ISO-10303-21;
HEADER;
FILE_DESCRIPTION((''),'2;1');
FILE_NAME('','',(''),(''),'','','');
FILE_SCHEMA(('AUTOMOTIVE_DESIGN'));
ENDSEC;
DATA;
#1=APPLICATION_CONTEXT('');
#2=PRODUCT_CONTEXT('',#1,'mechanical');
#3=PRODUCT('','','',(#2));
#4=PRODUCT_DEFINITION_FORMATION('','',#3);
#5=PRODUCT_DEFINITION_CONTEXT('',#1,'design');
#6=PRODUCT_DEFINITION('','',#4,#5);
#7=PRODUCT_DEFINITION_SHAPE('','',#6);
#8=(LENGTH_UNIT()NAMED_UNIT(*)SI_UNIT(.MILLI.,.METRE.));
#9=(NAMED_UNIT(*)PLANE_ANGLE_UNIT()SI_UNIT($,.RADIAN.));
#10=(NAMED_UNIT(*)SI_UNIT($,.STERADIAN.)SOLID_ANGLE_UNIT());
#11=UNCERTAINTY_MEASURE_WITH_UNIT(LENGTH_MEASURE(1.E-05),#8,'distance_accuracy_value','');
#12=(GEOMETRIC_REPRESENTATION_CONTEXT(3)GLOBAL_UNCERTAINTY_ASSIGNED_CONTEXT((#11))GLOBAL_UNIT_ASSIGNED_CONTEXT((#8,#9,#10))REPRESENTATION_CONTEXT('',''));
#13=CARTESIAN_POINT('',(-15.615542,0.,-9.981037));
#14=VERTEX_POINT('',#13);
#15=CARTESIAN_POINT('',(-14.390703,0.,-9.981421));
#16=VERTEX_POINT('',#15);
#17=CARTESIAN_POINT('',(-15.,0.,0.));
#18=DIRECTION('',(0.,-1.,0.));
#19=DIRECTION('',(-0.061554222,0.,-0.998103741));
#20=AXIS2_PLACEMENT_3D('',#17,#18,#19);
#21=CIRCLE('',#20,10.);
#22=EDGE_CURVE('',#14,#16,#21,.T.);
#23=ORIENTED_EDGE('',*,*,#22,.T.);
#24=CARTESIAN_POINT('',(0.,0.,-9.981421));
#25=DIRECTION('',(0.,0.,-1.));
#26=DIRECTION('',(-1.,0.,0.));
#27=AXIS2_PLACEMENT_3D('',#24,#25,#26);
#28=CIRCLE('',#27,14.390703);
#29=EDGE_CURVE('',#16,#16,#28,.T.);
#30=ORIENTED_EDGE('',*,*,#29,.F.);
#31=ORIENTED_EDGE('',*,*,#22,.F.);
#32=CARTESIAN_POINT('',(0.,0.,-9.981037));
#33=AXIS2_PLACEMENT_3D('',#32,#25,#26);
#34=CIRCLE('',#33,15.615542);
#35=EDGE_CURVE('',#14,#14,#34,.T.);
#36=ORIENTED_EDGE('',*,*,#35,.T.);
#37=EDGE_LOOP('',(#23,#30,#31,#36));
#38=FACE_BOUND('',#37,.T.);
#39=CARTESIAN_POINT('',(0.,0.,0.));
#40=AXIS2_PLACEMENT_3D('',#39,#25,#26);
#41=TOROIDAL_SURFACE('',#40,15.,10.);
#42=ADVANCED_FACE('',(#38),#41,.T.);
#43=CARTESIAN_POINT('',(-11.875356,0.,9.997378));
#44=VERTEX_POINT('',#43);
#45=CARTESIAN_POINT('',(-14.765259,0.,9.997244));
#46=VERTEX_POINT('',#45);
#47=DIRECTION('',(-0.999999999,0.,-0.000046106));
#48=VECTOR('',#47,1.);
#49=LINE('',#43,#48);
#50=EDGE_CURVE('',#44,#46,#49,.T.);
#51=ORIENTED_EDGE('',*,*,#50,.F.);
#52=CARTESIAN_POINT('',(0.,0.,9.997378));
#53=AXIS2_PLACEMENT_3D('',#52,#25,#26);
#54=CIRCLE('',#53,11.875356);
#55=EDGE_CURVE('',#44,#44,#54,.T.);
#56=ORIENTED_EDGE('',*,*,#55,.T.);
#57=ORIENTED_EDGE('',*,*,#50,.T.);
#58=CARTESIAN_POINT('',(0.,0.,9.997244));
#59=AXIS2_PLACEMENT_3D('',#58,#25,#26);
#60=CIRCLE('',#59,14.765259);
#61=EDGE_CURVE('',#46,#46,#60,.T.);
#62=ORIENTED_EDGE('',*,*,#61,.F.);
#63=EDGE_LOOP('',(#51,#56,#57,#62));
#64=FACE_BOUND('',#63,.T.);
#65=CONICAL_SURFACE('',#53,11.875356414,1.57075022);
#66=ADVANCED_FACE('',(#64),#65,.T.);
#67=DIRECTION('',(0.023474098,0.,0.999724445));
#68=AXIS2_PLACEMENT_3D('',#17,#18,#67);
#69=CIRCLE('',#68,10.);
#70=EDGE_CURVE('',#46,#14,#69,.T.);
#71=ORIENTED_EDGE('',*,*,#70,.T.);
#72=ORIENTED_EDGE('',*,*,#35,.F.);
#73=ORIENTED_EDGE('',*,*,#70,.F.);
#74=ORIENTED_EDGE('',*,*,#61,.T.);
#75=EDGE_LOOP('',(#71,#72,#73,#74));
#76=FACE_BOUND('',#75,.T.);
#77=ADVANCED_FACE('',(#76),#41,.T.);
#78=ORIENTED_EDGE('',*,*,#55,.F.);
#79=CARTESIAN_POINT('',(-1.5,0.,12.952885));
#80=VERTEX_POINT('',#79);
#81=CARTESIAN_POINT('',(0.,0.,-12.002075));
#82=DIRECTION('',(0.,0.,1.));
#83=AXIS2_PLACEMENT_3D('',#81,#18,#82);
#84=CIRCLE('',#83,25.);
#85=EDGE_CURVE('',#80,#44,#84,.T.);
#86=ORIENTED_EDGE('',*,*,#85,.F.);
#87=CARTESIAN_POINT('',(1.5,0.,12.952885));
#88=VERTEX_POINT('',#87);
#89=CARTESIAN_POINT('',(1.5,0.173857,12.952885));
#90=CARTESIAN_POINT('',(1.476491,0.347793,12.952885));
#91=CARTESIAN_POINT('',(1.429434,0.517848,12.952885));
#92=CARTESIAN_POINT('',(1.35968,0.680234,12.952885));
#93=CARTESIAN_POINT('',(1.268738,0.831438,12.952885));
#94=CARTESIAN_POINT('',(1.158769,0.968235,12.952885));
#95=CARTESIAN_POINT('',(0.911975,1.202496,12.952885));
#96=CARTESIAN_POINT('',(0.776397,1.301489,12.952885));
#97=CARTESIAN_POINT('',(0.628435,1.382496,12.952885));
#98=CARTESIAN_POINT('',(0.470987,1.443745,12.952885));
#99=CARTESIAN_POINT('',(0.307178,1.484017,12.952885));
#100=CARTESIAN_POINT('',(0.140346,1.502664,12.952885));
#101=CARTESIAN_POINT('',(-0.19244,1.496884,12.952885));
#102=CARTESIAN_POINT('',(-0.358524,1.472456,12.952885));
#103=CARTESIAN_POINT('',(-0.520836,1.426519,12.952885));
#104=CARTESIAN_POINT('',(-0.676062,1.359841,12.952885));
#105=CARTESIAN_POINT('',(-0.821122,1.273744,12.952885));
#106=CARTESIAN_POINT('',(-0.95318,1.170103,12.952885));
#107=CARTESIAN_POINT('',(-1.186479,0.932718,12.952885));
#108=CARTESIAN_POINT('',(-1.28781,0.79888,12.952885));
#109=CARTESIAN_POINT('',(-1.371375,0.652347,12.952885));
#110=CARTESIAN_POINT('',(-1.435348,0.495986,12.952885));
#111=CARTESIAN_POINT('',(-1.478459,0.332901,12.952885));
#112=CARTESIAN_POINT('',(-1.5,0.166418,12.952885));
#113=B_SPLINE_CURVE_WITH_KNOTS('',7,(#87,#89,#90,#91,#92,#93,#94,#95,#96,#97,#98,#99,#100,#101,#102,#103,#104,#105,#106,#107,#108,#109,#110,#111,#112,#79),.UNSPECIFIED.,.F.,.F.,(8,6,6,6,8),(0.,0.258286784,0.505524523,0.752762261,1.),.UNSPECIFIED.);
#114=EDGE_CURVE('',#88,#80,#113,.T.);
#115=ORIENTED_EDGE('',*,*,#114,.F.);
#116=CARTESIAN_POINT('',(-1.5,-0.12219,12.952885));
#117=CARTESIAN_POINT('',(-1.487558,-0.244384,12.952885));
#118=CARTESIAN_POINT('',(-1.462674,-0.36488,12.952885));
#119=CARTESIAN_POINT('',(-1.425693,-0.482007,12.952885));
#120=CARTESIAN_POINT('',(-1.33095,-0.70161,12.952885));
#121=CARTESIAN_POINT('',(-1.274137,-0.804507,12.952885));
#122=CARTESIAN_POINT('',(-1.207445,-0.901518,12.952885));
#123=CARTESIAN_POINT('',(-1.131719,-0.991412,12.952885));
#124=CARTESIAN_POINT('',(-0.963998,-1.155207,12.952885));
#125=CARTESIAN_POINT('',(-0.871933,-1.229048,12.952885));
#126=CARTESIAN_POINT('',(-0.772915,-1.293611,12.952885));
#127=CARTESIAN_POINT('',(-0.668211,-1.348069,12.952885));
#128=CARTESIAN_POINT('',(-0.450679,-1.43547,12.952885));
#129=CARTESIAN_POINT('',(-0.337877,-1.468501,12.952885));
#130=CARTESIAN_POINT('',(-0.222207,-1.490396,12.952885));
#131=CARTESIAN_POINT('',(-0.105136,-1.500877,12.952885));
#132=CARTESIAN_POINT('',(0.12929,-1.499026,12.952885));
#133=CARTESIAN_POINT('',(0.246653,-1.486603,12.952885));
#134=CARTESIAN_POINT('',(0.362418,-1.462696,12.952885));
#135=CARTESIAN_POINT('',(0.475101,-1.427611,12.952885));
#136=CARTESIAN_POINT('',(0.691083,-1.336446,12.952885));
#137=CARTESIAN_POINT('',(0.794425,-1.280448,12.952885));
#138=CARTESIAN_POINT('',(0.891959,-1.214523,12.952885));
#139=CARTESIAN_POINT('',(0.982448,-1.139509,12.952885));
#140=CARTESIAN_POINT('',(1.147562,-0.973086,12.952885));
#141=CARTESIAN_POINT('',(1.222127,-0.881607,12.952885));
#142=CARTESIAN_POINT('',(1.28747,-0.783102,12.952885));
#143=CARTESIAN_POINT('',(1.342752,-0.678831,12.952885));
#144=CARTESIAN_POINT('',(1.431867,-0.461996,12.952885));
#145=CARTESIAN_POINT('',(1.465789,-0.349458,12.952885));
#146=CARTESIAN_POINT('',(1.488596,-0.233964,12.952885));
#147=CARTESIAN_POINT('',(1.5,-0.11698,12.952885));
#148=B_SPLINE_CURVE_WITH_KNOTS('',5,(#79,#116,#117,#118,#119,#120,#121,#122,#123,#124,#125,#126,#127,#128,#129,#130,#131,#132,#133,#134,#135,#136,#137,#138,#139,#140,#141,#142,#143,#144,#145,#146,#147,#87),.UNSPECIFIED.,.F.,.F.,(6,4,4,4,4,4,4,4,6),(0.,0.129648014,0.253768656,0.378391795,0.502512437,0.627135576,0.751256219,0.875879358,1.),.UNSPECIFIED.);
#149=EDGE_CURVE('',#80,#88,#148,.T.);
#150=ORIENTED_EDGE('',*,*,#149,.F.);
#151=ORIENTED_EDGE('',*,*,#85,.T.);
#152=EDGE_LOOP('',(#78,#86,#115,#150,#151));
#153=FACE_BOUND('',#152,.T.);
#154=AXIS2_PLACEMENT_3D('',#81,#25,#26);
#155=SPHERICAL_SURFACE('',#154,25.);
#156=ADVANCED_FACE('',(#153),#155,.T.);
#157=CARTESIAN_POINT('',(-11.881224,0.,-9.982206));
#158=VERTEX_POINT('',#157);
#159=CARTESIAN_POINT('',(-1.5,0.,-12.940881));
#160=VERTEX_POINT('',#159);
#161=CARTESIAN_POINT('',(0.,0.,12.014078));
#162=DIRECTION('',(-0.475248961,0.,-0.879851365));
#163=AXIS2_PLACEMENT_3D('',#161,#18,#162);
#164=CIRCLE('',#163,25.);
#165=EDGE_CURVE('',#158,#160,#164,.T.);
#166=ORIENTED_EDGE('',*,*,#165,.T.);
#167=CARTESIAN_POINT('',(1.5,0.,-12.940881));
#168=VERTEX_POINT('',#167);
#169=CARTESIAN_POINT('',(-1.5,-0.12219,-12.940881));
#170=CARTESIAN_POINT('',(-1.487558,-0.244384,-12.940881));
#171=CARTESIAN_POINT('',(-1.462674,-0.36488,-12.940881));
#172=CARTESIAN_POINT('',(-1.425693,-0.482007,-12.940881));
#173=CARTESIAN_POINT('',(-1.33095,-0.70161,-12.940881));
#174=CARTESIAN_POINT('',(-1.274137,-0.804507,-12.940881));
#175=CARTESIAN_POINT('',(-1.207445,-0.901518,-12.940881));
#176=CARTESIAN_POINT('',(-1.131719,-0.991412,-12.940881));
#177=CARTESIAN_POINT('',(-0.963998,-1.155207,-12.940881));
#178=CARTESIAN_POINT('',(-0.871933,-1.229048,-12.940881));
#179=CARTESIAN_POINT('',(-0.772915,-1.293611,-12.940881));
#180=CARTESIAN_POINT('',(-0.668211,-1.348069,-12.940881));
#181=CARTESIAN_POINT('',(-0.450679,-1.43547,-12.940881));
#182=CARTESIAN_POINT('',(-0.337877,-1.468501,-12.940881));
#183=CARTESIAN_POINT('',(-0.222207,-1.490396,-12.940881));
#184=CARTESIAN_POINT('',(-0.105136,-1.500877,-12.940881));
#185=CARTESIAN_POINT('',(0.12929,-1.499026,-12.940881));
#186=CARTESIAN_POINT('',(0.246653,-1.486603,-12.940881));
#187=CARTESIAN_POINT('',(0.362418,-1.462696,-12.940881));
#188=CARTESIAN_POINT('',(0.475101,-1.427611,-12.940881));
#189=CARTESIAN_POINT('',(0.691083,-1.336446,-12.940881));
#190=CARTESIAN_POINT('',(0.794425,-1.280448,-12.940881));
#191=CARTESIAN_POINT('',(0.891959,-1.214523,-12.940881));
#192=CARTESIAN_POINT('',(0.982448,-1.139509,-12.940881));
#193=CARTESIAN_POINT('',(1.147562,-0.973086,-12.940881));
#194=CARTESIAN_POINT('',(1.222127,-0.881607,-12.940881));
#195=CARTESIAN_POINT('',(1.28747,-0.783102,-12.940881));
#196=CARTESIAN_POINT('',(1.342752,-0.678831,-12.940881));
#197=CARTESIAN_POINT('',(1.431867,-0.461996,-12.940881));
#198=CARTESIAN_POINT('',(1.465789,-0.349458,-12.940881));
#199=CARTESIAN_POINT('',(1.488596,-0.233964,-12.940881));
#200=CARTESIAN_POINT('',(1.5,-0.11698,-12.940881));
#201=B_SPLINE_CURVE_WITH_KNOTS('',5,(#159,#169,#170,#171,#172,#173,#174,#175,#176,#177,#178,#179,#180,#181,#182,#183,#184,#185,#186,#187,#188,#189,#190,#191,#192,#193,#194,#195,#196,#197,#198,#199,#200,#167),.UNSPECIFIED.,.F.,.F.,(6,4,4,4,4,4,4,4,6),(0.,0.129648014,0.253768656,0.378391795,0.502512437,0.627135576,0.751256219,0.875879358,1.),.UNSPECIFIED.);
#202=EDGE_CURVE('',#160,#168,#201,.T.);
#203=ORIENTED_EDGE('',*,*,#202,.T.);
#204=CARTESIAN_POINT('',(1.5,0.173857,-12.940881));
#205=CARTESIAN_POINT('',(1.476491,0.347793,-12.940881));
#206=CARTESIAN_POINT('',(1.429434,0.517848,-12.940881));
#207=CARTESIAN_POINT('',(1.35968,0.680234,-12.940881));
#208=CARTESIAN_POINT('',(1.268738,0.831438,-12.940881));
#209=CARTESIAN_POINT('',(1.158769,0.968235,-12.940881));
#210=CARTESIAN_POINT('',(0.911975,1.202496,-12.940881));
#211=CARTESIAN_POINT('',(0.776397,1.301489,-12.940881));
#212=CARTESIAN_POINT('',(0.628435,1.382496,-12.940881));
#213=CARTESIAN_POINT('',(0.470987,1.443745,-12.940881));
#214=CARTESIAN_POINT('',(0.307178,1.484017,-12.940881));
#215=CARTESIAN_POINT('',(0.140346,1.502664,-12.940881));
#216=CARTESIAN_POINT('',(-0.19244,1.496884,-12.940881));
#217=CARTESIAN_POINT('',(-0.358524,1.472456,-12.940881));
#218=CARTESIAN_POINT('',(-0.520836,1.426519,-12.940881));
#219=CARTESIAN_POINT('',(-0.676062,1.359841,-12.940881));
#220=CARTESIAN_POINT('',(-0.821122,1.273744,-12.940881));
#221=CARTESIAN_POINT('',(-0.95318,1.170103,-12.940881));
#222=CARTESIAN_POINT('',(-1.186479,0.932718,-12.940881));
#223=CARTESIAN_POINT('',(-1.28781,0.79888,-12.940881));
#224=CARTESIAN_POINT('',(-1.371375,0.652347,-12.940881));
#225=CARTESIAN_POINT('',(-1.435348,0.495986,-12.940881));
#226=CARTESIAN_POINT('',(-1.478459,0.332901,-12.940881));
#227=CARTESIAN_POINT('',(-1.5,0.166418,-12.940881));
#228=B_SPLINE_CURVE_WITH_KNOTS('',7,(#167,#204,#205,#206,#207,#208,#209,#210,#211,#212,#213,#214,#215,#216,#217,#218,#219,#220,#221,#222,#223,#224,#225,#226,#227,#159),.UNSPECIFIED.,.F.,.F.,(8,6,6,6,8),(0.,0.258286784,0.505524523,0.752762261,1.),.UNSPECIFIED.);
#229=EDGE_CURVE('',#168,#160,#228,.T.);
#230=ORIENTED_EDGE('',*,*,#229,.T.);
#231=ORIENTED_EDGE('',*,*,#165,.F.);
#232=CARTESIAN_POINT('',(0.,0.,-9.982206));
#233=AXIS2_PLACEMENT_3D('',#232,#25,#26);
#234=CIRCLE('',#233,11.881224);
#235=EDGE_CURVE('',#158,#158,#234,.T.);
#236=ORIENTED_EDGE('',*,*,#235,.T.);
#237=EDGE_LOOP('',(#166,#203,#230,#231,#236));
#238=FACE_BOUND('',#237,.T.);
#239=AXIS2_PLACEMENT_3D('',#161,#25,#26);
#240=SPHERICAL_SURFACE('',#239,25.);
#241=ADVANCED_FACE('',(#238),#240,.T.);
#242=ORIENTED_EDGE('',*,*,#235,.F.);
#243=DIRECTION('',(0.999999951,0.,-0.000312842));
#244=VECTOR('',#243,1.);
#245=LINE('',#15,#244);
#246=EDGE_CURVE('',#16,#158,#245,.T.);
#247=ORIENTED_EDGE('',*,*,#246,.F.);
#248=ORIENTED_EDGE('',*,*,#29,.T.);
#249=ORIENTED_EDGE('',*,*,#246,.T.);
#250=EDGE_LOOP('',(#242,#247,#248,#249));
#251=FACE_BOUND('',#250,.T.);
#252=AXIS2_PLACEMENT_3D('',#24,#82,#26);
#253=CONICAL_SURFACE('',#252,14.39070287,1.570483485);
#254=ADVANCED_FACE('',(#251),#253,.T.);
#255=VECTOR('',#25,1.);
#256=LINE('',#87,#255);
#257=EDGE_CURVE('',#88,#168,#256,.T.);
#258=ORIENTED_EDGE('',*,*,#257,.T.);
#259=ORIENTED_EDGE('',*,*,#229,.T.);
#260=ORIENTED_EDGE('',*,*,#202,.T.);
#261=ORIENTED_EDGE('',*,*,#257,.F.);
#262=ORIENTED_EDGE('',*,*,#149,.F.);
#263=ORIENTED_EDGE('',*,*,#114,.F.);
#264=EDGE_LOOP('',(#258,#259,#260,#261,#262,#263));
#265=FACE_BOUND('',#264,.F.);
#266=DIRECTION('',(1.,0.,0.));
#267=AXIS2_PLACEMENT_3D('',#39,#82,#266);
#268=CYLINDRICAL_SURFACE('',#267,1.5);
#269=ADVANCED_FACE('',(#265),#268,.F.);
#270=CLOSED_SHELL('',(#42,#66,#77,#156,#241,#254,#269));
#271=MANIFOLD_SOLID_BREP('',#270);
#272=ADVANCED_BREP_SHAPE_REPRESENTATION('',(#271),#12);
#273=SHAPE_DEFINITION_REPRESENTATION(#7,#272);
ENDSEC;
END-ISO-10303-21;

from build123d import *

# Parameters (mm, degrees)
F2_R          = 1.5
F3_DEPTH      = 12.9869215285
F3_DEPTH_BACK = 12.9989252025


with BuildPart() as f1:
    # F0 (on Front) → F1 (revolve)
    with BuildSketch(Plane.XZ):
        with BuildLine():
            Line((-14.3907028701, -9.9814205907), (-11.8812240268, -9.9822056607))
            ThreePointArc((-11.8812240268, -9.9822056607), (-6.127515675, -12.2233626404), (0, -12.9859215285))
            Line((0, -12.9859215285), (0, 12.9979252025))
            ThreePointArc((0, 12.9979252025), (-6.1242831271, 12.2361833119), (-11.8753564136, 9.9973776968))
            Line((-11.8753564136, 9.9973776968), (-14.765259022, 9.997244454))
            ThreePointArc((-14.765259022, 9.997244454), (-24.9909553574, 0.425218823), (-15.6155422227, -9.9810374096))
            Line((-15.6155422227, -9.9810374096), (-14.3907028701, -9.9814205907))
        make_face()
        with BuildLine():
            ThreePointArc((-15.6155422227, -9.9810374096), (-15.0031284186, -9.9999995106), (-14.3907028701, -9.9814205907))
            Line((-14.3907028701, -9.9814205907), (-15.6155422227, -9.9810374096))
        make_face()
    revolve(axis=Axis((0, 0, 0.006001837), (0, 0, -1)))

    # F2 (on Top) → F3 (cut, two sides)
    with BuildSketch(Plane.XY) as f3_sk:
        Circle(F2_R)
    extrude(amount=-F3_DEPTH, mode=Mode.SUBTRACT)
    extrude(f3_sk.sketch, amount=F3_DEPTH_BACK, mode=Mode.SUBTRACT)


solid = f1.part
